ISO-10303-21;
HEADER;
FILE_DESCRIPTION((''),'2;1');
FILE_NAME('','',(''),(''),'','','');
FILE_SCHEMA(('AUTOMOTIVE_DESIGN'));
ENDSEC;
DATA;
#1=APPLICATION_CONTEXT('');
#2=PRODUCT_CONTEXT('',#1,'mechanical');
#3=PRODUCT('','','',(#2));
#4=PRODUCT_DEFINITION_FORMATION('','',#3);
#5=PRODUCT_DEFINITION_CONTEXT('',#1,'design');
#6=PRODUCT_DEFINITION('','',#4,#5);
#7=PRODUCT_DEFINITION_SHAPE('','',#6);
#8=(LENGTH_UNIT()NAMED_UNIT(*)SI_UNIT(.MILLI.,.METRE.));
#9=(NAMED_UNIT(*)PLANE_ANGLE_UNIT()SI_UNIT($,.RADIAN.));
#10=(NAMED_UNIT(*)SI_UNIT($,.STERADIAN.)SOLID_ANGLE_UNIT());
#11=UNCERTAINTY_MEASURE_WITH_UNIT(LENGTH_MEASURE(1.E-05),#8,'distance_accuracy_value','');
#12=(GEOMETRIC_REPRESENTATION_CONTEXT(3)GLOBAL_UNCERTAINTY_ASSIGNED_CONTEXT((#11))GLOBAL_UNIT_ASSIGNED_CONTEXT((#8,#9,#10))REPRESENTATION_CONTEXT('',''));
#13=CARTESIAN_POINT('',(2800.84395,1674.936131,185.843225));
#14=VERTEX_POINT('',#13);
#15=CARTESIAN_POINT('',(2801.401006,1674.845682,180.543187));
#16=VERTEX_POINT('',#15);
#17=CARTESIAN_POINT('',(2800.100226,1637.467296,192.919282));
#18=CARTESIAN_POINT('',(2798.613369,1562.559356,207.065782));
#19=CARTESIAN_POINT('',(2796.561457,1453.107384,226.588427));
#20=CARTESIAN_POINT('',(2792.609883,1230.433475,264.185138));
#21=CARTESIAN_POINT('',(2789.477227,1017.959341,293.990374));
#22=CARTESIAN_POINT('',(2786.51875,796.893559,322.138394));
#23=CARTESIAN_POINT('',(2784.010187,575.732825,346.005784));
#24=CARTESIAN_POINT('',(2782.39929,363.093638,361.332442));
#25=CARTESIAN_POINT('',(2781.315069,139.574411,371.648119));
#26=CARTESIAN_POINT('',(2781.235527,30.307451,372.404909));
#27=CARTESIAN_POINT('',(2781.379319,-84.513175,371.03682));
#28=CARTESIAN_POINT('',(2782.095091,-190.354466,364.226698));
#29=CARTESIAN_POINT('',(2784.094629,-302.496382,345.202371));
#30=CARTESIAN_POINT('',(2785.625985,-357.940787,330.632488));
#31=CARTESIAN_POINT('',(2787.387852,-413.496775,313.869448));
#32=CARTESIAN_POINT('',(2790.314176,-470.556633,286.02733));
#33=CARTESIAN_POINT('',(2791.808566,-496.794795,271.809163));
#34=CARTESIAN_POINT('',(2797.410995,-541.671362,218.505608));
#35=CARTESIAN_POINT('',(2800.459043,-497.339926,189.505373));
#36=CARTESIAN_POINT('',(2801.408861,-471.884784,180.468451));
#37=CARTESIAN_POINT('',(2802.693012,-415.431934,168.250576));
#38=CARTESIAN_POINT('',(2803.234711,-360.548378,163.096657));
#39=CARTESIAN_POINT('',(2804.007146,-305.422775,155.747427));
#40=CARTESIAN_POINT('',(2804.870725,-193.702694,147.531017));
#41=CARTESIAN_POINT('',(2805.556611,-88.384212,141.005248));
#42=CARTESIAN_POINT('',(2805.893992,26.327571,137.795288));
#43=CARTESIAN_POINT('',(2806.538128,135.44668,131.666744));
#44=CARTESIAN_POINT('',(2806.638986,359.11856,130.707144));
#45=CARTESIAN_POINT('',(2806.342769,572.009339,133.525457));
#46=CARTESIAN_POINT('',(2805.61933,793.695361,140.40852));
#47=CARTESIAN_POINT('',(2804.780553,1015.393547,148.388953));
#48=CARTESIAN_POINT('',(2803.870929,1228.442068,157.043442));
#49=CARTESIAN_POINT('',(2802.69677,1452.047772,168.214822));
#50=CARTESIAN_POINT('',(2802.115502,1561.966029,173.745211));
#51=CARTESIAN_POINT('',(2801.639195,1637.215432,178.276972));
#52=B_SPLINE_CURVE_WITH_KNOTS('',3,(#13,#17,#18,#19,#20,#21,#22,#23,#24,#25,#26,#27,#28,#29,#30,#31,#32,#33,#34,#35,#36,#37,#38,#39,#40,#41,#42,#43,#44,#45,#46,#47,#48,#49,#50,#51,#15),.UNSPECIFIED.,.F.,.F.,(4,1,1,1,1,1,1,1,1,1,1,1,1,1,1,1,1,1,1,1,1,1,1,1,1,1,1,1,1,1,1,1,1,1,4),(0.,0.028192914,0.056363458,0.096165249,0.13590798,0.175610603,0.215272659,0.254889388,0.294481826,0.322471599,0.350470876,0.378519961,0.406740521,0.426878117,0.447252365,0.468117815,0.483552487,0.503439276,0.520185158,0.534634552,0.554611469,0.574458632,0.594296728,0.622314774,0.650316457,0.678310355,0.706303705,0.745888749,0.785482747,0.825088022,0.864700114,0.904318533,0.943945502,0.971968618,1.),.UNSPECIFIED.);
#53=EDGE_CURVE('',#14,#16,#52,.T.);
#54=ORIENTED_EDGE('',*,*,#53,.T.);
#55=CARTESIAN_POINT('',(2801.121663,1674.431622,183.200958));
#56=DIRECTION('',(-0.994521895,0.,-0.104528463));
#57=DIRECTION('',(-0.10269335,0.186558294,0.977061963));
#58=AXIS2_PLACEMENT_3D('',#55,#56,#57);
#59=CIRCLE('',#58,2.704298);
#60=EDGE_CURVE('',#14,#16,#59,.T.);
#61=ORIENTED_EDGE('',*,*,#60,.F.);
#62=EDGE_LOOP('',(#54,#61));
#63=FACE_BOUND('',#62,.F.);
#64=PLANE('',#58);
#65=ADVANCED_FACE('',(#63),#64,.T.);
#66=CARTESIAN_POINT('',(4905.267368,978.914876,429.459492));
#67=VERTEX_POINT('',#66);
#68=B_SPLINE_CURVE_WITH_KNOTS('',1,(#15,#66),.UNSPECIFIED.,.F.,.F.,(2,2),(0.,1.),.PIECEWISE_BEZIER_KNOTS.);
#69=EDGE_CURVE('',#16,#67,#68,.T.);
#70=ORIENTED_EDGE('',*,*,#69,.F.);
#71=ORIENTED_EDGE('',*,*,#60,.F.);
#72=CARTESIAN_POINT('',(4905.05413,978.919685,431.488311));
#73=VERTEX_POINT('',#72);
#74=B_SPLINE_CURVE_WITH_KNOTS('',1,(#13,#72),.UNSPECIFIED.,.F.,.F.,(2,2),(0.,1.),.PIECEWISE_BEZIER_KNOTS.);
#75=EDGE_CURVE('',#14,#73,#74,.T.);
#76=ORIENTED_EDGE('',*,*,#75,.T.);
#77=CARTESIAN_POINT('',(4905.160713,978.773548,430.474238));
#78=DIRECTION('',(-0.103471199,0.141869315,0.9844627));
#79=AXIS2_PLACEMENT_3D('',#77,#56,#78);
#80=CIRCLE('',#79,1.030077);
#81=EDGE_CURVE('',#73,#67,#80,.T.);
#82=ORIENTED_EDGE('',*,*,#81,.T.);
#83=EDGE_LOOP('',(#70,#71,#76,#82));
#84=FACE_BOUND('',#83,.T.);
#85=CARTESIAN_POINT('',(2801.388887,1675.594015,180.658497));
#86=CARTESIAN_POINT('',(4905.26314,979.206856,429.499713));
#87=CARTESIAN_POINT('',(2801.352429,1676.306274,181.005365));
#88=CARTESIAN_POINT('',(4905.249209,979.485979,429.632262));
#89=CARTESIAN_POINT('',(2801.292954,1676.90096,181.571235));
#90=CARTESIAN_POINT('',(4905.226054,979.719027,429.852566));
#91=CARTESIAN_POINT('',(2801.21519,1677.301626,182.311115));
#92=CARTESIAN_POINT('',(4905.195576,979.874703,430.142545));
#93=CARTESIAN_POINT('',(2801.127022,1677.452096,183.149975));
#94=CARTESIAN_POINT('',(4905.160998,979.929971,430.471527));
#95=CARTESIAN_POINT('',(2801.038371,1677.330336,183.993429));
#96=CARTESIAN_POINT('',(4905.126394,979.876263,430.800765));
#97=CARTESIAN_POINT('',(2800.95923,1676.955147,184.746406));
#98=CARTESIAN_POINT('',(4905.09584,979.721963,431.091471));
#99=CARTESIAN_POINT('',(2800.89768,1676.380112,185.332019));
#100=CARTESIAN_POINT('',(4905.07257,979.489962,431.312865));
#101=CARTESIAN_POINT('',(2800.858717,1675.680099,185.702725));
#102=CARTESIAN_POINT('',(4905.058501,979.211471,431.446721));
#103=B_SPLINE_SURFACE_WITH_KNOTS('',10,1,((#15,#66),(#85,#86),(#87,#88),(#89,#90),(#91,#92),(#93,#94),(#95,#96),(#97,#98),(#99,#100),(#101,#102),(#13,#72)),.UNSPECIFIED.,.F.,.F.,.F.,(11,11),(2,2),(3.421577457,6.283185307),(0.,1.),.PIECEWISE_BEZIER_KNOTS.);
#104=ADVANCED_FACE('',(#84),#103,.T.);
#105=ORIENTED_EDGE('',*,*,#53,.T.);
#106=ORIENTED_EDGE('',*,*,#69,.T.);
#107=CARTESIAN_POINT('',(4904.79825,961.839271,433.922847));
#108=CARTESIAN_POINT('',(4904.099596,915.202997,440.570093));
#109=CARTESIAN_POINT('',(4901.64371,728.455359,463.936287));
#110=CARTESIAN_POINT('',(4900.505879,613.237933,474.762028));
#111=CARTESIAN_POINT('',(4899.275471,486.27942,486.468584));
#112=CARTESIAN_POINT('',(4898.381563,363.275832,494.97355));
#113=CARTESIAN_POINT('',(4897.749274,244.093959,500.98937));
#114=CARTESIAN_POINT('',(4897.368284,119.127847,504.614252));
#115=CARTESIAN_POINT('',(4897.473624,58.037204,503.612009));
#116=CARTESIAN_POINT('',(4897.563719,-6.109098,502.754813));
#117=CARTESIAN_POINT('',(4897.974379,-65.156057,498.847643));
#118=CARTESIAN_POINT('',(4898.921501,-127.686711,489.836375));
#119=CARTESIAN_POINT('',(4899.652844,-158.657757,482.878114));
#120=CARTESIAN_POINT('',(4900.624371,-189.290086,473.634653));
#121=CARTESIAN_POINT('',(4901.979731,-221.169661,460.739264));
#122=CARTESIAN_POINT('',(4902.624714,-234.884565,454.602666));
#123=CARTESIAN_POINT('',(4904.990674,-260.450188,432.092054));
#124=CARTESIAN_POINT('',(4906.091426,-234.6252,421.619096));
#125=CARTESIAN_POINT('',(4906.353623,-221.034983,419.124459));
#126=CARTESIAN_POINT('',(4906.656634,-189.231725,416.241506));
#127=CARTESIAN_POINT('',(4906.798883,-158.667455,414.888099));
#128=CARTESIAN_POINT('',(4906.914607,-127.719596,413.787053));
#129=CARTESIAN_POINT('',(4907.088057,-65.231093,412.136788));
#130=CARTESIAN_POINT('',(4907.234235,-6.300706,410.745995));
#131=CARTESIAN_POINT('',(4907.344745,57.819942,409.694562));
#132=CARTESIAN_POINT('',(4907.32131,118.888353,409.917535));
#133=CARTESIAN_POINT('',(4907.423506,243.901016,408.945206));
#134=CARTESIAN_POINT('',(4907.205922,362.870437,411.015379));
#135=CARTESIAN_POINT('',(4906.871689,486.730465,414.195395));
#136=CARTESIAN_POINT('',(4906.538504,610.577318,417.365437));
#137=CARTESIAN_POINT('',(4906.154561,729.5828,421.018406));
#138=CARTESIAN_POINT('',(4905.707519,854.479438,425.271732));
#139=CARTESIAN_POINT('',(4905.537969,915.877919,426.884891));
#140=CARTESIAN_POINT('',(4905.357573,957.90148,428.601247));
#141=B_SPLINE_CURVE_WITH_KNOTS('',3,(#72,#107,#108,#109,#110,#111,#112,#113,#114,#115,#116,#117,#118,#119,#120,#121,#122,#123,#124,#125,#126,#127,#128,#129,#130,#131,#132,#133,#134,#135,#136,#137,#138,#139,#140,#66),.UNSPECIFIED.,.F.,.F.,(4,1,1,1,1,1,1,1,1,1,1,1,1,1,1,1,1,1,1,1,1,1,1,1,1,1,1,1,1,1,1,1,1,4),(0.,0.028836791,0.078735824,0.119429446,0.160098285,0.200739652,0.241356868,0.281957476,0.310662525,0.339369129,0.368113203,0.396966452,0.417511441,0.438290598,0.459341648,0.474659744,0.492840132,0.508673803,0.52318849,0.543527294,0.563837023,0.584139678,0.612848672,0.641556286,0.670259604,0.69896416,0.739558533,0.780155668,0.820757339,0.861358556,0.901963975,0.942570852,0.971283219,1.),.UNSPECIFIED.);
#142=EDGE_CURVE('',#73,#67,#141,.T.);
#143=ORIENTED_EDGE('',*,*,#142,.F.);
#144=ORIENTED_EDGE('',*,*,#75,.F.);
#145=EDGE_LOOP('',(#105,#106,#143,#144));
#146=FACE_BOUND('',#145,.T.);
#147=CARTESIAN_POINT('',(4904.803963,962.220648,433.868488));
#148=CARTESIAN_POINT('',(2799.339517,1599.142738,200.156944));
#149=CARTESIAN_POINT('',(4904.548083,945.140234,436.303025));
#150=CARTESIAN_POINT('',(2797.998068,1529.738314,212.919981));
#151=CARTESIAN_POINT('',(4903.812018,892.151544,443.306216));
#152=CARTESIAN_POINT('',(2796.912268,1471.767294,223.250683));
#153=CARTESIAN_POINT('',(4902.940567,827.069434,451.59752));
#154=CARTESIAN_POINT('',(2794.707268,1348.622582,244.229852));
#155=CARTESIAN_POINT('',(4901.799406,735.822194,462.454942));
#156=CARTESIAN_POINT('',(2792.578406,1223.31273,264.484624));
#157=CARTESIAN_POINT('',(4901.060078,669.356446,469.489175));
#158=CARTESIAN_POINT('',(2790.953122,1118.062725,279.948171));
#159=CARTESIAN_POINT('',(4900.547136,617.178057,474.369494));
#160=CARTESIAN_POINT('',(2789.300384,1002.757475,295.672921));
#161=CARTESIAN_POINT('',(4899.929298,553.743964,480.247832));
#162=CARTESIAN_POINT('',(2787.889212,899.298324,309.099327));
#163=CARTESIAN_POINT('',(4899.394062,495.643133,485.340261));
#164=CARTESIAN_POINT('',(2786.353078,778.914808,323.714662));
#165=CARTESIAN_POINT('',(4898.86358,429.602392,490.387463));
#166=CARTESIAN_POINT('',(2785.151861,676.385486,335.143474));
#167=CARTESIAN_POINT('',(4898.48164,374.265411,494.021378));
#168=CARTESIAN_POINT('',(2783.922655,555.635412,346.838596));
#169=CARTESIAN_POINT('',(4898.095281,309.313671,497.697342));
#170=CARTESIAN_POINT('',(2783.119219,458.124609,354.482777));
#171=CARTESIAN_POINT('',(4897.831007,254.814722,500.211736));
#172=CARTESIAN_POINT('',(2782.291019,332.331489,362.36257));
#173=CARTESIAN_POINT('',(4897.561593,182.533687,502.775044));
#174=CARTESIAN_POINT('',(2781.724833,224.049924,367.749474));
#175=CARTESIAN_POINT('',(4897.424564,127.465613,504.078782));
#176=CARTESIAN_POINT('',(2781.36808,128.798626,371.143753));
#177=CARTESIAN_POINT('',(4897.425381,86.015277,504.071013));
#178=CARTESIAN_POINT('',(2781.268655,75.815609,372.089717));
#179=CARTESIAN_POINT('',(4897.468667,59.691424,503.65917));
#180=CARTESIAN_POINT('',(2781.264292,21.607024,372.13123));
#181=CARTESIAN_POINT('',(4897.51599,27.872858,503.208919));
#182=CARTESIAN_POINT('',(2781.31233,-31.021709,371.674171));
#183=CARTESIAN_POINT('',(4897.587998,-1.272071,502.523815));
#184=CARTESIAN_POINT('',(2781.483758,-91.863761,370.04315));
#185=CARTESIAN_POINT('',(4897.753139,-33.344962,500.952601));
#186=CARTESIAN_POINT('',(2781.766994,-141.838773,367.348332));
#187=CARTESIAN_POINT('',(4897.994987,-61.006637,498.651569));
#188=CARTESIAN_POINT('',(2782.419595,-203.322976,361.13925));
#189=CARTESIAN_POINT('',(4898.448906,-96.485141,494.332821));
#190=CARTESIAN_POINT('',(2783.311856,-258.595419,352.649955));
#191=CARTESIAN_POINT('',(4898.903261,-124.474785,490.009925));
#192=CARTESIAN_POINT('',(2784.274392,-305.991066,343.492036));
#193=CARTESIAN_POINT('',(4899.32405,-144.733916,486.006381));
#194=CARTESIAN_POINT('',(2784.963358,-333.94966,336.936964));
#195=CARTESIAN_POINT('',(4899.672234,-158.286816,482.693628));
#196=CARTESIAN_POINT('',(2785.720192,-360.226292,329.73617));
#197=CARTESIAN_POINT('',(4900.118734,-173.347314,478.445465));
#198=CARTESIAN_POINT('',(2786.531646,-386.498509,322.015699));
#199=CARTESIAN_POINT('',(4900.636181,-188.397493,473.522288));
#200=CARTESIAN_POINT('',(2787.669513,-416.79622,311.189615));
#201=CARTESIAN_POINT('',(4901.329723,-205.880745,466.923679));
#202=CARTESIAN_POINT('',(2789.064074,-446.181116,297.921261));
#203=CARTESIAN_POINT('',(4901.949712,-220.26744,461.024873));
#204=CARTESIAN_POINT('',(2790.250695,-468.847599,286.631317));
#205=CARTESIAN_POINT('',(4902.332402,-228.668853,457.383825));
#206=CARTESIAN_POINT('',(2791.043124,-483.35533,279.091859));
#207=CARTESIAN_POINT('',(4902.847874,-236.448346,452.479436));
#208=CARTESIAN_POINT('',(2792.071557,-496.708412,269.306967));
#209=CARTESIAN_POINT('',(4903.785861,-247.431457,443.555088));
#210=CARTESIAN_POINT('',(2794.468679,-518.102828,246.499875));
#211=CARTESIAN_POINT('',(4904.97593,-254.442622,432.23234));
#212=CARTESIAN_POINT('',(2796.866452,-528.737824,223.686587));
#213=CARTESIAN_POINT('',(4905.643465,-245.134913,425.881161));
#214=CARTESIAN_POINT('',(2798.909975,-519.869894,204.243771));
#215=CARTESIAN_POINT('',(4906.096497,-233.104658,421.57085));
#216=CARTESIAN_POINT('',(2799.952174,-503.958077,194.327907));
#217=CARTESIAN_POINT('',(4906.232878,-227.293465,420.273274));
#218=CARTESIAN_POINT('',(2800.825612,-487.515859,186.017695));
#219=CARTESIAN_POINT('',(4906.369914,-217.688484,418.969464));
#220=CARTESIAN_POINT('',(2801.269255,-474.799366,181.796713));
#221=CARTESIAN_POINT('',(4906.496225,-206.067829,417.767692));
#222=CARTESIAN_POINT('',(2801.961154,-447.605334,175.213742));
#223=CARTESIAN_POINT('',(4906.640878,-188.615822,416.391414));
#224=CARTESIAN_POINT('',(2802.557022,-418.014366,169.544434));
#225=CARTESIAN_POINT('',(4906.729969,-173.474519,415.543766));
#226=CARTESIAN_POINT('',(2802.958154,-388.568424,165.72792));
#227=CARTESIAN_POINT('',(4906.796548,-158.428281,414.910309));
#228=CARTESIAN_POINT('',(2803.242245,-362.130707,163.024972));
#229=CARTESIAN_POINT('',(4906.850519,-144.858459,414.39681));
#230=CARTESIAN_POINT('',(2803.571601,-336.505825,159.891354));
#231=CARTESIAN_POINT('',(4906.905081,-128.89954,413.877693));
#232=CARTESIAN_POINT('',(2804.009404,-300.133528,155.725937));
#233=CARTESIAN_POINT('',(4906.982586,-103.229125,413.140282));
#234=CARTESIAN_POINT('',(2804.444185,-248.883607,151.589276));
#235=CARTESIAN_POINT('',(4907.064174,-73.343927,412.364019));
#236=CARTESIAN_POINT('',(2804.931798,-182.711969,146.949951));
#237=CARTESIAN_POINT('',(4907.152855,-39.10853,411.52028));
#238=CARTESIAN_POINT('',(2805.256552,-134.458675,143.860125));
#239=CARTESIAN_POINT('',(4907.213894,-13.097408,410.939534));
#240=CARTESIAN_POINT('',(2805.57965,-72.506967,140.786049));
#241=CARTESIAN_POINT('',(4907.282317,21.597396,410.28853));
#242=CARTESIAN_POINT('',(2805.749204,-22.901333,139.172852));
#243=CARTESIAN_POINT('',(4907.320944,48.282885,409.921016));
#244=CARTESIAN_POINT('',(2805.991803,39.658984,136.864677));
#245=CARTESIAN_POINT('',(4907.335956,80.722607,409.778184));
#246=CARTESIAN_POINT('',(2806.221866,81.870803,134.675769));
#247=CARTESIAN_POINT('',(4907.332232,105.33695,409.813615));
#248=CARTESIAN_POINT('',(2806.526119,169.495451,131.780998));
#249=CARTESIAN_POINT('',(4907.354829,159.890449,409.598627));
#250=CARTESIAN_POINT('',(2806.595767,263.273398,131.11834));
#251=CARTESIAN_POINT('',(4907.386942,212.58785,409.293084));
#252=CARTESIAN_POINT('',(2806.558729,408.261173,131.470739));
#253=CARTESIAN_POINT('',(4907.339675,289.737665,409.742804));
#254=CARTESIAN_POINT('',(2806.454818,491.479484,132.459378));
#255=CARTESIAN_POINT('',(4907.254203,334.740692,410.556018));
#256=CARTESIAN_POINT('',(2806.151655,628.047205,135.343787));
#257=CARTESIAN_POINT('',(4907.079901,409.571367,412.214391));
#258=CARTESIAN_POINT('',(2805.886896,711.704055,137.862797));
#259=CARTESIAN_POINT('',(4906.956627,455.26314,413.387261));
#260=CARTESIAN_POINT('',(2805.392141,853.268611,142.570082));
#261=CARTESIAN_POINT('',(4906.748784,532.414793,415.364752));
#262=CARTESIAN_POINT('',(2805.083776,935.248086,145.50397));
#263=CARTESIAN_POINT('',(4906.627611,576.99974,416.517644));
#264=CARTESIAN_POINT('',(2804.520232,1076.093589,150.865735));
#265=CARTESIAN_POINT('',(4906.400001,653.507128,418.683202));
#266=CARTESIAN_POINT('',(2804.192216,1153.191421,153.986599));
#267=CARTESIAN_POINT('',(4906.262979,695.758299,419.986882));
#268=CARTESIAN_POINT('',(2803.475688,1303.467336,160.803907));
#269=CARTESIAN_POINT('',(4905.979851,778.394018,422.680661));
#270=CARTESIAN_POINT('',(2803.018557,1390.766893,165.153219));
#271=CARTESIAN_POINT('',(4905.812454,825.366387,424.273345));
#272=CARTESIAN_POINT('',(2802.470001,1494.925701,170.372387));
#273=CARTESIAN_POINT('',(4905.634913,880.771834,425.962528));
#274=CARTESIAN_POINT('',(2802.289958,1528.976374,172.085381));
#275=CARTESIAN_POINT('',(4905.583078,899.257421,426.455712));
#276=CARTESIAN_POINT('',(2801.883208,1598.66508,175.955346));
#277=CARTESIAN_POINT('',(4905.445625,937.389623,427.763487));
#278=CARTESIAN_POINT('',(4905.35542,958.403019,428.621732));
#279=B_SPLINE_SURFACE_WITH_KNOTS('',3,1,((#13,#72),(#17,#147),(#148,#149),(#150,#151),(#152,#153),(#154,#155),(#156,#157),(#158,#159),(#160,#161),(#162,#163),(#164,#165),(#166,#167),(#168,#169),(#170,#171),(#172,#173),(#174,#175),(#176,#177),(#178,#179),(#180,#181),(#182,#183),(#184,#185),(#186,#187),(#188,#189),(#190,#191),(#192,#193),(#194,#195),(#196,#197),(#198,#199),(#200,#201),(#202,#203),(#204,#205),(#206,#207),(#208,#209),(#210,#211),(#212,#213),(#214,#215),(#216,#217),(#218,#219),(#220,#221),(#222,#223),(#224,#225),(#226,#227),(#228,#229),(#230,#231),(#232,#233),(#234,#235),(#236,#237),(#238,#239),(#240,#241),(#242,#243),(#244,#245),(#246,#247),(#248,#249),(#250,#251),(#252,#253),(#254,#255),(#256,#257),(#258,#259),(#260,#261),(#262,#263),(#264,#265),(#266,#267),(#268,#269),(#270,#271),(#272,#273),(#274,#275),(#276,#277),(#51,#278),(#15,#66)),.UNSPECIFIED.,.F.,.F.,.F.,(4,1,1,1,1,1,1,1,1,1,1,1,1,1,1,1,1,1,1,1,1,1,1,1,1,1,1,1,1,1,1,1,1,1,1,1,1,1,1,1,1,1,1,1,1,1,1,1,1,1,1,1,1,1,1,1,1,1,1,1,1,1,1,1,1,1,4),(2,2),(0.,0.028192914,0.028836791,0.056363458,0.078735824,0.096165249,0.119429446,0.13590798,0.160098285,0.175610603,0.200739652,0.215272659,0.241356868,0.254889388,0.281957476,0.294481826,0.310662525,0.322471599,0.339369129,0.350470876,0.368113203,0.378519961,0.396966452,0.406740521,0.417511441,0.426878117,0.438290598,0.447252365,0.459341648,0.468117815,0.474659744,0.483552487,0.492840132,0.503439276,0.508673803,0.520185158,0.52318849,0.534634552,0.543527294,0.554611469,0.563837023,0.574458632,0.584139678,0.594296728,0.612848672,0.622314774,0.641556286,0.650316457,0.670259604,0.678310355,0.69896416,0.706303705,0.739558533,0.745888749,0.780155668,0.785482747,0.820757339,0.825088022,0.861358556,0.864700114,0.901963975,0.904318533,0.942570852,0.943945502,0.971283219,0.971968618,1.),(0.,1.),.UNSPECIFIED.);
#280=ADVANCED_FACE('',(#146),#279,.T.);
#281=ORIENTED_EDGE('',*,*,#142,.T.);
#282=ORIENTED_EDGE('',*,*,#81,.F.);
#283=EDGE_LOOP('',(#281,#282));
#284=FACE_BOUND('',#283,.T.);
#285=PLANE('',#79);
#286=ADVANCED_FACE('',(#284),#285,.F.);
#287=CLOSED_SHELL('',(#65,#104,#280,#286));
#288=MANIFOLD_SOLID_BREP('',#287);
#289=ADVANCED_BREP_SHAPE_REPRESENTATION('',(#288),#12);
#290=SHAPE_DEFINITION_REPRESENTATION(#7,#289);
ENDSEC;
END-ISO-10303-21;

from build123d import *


with BuildPart() as f9:
    # F7 (on face) → F9 section 0
    with BuildSketch(Plane(origin=(2789.5608593403, 0, 293.194660848), x_dir=(0, -1, 0), z_dir=(-0.9945218954, 0, -0.1045284633))):
        with BuildLine():
            add(Edge.make_bspline(
                [(-1674.9361309886, -107.9427576127), (-1637.4672962285, -100.8277234072), (-1562.5593562878, -86.6033004074), (-1453.1073844063, -66.9731191492), (-1230.4334752707, -29.1693149363), (-1017.9593413467, 0.8000957791), (-796.8935594426, 29.1031628485), (-575.7328245472, 53.1020212502), (-363.093637858, 68.513103179), (-139.5744105016, 78.8856014184), (-30.3074510706, 79.6465607408), (84.5131751526, 78.2709351665), (190.3544656586, 71.423301684), (302.4963815785, 52.2941834439), (357.9407868905, 37.6440452339), (413.4967752298, 20.788669365), (470.5566325035, -7.2068104015), (496.7947946717, -21.5032951955), (541.6713617639, -75.1004607385), (497.3399259613, -104.2604378308), (471.8847837935, -113.347137273), (415.431934254, -125.6323119565), (360.5483778662, -130.8146198497), (305.4227754367, -138.2043317621), (193.7026937829, -146.4660001933), (88.3842122177, -153.0277142593), (-26.3275714215, -156.2553564371), (-135.4466799784, -162.4176581974), (-359.1185599884, -163.3825437775), (-572.0093390245, -160.5487067399), (-793.6953612013, -153.6277291235), (-1015.393547331, -145.6033386135), (-1228.4420680323, -136.9011778967), (-1452.0477715375, -125.6682627238), (-1561.9660286955, -120.1074109507), (-1637.2154322096, -115.5506876895), (-1674.845681882, -113.2719901052)],
                knots=[0, 0, 0, 0, 0.0281929138, 0.056363458, 0.096165249, 0.1359079799, 0.1756106035, 0.2152726592, 0.2548893878, 0.2944818259, 0.3224715986, 0.3504708764, 0.3785199609, 0.4067405213, 0.4268781172, 0.4472523654, 0.4681178147, 0.4835524873, 0.5034392763, 0.5201851584, 0.5346345515, 0.5546114688, 0.5744586317, 0.5942967281, 0.6223147737, 0.6503164573, 0.6783103546, 0.7063037045, 0.7458887493, 0.7854827471, 0.8250880218, 0.8647001136, 0.9043185332, 0.9439455018, 0.9719686182, 1, 1, 1, 1], degree=3))
            ThreePointArc((-1674.9361309886, -107.9427576127), (-1677.1355304311, -110.6454701955), (-1674.845681882, -113.2719901052))
        make_face()
    # F8 (on face) → F9 section 1
    with BuildSketch(Plane(origin=(4896.3162616126, 0, 514.6235762957), x_dir=(0, -1, 0), z_dir=(-0.9945218954, 0, -0.1045284633))):
        with BuildLine():
            add(Edge.make_bspline(
                [(-978.9196847444, -83.5931978723), (-961.8392705884, -81.1452512028), (-915.2029971193, -74.461390421), (-728.4553589167, -50.9664895158), (-613.2379326201, -40.0811166739), (-486.2794197167, -28.310077655), (-363.2758321924, -19.7582643789), (-244.0939587157, -13.7093076956), (-119.127847265, -10.0644584827), (-58.0372038583, -11.0722216396), (6.1090975486, -11.9341399215), (65.1560565837, -15.8628313342), (127.6867107185, -24.9237361603), (158.6577574839, -31.9203252995), (189.2900858859, -41.2147021607), (221.16966069, -54.1811221482), (234.8845654493, -60.3515223716), (260.4501880091, -82.9861289582), (234.6251999677, -93.5167751698), (221.0349827114, -96.0251532461), (189.2317245017, -98.9239862156), (158.6674554628, -100.2848478199), (127.7195961076, -101.3919592376), (65.2310931887, -103.0513145144), (6.3007060663, -104.4497677698), (-57.8199420825, -105.5069924655), (-118.8883529339, -105.2827917375), (-243.901016129, -106.2604764199), (-362.8704366618, -104.1789005264), (-486.7304648596, -100.9813682749), (-610.5773175591, -97.7938646788), (-729.582799946, -94.1207736114), (-854.4794379321, -89.8440194087), (-915.8779188252, -88.2219748146), (-957.9014802316, -86.4961639626), (-978.914876113, -85.6331922049)],
                knots=[0, 0, 0, 0, 0.0288367912, 0.0787358238, 0.119429446, 0.1600982846, 0.2007396518, 0.2413568685, 0.2819574759, 0.3106625252, 0.3393691292, 0.3681132033, 0.3969664519, 0.4175114411, 0.4382905977, 0.4593416476, 0.4746597444, 0.4928401316, 0.5086738028, 0.5231884904, 0.5435272942, 0.5638370231, 0.5841396779, 0.6128486717, 0.6415562856, 0.6702596041, 0.6989641603, 0.739558533, 0.780155668, 0.820757339, 0.8613585564, 0.9019639746, 0.9425708522, 0.9712832188, 1, 1, 1, 1], degree=3))
            ThreePointArc((-978.9196847444, -83.5931978723), (-979.8036227246, -84.6152843059), (-978.914876113, -85.6331922049))
        make_face()
    loft()


solid = f9.part
